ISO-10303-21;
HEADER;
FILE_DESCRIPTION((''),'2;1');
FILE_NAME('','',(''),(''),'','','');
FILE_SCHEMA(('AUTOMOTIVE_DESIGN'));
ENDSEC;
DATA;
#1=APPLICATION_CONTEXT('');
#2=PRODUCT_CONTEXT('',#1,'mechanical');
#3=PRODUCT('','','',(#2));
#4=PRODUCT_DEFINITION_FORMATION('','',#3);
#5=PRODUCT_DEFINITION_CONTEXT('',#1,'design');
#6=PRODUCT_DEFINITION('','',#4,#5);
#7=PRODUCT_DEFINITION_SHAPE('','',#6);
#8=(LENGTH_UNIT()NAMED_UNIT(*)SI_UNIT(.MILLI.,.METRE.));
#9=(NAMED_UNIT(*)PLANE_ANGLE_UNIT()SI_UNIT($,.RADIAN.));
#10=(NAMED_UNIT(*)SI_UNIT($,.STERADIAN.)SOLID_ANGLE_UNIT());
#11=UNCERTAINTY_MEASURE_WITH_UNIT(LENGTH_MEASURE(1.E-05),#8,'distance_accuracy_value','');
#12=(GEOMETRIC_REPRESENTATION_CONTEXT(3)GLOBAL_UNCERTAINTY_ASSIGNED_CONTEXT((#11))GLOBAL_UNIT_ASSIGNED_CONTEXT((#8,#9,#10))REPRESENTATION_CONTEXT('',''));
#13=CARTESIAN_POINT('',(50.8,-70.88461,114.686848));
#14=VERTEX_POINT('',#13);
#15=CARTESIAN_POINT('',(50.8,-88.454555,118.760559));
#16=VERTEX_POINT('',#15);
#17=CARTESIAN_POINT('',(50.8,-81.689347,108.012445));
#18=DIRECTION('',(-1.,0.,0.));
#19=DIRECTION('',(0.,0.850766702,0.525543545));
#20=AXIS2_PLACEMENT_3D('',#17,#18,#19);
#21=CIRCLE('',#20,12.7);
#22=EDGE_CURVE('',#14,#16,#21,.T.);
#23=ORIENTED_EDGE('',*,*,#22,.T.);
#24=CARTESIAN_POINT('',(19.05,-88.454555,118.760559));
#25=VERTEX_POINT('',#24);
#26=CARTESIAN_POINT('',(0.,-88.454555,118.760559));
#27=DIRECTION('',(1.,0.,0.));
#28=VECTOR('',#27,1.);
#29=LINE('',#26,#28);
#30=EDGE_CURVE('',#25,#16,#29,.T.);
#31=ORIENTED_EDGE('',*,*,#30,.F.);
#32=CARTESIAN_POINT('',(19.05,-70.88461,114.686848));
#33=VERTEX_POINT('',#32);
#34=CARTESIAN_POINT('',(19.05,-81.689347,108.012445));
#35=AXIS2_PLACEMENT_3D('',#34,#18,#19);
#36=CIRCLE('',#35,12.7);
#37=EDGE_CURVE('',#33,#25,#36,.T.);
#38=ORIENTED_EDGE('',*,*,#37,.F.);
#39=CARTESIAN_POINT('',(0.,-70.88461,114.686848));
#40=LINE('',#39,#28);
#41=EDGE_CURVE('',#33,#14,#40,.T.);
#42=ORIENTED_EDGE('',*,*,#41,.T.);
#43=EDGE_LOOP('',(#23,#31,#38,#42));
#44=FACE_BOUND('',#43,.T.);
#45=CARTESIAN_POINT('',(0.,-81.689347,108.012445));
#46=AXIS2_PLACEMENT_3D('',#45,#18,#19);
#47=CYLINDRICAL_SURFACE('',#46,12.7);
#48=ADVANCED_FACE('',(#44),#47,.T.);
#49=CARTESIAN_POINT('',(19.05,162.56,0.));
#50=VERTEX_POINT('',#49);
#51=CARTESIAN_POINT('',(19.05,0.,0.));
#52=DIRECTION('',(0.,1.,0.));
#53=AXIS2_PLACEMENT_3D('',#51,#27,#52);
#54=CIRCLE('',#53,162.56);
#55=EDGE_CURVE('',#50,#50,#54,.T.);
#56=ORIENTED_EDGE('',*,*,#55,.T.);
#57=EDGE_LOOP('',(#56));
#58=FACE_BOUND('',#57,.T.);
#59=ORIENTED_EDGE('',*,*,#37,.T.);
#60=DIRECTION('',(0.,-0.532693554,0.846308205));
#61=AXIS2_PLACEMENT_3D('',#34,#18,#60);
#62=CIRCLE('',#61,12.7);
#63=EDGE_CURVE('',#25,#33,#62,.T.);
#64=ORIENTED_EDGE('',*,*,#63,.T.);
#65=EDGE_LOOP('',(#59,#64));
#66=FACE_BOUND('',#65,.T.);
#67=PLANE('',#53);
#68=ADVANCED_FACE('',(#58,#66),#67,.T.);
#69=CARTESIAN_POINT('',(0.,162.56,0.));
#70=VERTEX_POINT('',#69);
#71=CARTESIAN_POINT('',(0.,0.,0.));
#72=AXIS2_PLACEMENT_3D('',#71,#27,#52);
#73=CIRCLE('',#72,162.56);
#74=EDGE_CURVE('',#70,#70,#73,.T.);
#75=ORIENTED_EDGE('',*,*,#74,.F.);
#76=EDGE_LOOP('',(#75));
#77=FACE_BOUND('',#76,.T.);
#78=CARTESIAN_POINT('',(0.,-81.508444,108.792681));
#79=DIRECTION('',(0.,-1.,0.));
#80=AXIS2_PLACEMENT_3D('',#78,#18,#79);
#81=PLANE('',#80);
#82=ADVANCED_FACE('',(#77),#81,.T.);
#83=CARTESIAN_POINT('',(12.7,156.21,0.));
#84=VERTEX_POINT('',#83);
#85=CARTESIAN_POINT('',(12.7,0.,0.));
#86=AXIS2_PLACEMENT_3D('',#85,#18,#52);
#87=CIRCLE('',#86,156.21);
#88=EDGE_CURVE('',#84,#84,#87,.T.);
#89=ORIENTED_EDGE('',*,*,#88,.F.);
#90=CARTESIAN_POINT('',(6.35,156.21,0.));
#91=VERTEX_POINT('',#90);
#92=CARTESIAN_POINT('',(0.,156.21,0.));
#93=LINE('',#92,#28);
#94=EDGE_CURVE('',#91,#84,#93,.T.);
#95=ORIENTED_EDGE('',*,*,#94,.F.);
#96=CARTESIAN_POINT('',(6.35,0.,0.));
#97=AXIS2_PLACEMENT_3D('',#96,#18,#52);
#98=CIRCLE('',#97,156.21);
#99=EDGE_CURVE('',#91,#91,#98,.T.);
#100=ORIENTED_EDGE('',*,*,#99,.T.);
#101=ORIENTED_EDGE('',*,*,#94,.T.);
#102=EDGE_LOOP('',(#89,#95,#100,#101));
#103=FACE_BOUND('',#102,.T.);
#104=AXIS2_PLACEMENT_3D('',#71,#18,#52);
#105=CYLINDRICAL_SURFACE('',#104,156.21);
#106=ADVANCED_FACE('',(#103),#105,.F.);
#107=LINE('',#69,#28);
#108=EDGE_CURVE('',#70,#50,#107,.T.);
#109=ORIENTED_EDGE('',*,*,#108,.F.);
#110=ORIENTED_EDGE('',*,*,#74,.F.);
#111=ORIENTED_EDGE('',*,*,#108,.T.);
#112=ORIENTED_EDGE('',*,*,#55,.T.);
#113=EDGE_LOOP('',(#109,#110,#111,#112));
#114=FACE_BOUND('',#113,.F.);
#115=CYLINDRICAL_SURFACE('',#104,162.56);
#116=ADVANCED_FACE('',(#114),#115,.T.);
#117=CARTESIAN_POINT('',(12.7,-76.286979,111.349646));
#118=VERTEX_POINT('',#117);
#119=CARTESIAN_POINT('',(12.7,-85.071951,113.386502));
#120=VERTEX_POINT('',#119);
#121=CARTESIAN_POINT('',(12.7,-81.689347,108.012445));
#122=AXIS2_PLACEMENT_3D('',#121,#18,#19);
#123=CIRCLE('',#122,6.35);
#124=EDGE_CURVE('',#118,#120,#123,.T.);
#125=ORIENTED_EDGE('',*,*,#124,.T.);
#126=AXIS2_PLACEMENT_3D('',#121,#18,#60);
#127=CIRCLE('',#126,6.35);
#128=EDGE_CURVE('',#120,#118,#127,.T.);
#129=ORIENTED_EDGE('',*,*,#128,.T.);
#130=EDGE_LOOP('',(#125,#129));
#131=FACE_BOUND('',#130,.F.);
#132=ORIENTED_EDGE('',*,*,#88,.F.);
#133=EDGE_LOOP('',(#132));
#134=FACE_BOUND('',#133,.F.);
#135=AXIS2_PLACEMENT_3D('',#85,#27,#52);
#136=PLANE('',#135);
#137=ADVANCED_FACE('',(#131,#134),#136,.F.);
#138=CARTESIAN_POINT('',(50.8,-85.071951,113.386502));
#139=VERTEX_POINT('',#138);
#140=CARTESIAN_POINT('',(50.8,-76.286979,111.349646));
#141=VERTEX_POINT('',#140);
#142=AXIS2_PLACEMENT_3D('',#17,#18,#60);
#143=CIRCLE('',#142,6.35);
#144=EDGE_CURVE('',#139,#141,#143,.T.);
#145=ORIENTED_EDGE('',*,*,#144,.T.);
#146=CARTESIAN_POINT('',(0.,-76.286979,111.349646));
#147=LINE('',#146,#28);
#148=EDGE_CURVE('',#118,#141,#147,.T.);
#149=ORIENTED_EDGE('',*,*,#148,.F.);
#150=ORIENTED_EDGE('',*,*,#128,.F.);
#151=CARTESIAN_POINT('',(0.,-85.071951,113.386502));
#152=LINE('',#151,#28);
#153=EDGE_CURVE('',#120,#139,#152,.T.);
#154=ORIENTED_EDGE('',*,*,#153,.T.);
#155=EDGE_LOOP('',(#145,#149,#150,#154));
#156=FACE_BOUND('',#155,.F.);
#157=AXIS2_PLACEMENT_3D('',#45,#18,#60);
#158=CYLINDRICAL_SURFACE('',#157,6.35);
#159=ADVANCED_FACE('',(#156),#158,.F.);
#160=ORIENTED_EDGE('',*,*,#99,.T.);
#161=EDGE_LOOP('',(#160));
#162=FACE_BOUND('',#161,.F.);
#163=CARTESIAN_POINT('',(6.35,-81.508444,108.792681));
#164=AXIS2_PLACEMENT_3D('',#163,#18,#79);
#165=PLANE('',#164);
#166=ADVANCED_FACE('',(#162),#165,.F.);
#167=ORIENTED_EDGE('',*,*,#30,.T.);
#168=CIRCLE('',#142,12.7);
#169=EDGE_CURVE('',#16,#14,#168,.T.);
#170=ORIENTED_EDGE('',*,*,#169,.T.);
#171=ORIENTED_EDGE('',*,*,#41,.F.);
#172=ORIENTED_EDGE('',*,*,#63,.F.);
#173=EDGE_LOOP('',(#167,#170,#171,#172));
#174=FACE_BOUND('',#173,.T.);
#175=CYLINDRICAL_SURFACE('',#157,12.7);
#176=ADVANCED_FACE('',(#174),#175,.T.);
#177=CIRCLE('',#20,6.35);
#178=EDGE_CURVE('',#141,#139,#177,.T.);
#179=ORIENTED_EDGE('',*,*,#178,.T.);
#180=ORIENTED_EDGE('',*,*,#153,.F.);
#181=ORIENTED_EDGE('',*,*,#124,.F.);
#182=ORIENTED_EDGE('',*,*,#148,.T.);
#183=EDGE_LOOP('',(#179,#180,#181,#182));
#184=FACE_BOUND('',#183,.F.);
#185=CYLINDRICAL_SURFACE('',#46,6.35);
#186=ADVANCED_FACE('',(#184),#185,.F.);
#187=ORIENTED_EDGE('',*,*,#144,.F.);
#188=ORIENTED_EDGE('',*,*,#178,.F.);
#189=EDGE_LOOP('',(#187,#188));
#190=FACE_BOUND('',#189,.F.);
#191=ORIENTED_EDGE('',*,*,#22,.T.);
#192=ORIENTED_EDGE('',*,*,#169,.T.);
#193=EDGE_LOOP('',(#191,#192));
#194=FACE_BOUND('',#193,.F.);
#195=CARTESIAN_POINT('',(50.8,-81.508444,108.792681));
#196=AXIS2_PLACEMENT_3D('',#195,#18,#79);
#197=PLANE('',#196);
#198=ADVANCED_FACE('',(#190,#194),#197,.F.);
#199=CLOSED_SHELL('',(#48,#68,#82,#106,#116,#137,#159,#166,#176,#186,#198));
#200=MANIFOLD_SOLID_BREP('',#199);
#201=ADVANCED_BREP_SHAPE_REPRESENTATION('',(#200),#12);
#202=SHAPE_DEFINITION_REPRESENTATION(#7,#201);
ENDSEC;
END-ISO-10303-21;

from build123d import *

# Parameters (mm, degrees)
F0_R     = 162.56
F1_DEPTH = 19.05
F4_DEPTH = 50.8
F7_T     = -6.35


# Not quite as in the source:
# - the program builds the solid bodies; features that only make, move or delete a surface that nothing else refers to are left out


with BuildPart() as f1:
    # F0 (on Right) → F1 (new body)
    with BuildSketch(Plane.YZ):
        Circle(F0_R)
    extrude(amount=F1_DEPTH)

    # F3 (on face) → F4 (join)
    with BuildSketch(Plane(origin=(0, 0, 0), x_dir=(0, -1, 0), z_dir=(-1, 0, 0))):
        with BuildLine():
            ThreePointArc((88.4545554599, 118.760558867), (78.8208582967, 120.384258227), (70.884610199, 114.6868476944))
            ThreePointArc((70.884610199, 114.6868476944), (84.557836343, 95.6406311102), (88.4545554599, 118.760558867))
        make_face()
    extrude(amount=-F4_DEPTH)

    # F7
    f7_openings = [f1.faces().sort_by_distance(p)[0] for p in [
        (50.8, -81.689347, 108.012445),
    ]]
    offset(amount=F7_T, openings=f7_openings, kind=Kind.INTERSECTION)


solid = f1.part
